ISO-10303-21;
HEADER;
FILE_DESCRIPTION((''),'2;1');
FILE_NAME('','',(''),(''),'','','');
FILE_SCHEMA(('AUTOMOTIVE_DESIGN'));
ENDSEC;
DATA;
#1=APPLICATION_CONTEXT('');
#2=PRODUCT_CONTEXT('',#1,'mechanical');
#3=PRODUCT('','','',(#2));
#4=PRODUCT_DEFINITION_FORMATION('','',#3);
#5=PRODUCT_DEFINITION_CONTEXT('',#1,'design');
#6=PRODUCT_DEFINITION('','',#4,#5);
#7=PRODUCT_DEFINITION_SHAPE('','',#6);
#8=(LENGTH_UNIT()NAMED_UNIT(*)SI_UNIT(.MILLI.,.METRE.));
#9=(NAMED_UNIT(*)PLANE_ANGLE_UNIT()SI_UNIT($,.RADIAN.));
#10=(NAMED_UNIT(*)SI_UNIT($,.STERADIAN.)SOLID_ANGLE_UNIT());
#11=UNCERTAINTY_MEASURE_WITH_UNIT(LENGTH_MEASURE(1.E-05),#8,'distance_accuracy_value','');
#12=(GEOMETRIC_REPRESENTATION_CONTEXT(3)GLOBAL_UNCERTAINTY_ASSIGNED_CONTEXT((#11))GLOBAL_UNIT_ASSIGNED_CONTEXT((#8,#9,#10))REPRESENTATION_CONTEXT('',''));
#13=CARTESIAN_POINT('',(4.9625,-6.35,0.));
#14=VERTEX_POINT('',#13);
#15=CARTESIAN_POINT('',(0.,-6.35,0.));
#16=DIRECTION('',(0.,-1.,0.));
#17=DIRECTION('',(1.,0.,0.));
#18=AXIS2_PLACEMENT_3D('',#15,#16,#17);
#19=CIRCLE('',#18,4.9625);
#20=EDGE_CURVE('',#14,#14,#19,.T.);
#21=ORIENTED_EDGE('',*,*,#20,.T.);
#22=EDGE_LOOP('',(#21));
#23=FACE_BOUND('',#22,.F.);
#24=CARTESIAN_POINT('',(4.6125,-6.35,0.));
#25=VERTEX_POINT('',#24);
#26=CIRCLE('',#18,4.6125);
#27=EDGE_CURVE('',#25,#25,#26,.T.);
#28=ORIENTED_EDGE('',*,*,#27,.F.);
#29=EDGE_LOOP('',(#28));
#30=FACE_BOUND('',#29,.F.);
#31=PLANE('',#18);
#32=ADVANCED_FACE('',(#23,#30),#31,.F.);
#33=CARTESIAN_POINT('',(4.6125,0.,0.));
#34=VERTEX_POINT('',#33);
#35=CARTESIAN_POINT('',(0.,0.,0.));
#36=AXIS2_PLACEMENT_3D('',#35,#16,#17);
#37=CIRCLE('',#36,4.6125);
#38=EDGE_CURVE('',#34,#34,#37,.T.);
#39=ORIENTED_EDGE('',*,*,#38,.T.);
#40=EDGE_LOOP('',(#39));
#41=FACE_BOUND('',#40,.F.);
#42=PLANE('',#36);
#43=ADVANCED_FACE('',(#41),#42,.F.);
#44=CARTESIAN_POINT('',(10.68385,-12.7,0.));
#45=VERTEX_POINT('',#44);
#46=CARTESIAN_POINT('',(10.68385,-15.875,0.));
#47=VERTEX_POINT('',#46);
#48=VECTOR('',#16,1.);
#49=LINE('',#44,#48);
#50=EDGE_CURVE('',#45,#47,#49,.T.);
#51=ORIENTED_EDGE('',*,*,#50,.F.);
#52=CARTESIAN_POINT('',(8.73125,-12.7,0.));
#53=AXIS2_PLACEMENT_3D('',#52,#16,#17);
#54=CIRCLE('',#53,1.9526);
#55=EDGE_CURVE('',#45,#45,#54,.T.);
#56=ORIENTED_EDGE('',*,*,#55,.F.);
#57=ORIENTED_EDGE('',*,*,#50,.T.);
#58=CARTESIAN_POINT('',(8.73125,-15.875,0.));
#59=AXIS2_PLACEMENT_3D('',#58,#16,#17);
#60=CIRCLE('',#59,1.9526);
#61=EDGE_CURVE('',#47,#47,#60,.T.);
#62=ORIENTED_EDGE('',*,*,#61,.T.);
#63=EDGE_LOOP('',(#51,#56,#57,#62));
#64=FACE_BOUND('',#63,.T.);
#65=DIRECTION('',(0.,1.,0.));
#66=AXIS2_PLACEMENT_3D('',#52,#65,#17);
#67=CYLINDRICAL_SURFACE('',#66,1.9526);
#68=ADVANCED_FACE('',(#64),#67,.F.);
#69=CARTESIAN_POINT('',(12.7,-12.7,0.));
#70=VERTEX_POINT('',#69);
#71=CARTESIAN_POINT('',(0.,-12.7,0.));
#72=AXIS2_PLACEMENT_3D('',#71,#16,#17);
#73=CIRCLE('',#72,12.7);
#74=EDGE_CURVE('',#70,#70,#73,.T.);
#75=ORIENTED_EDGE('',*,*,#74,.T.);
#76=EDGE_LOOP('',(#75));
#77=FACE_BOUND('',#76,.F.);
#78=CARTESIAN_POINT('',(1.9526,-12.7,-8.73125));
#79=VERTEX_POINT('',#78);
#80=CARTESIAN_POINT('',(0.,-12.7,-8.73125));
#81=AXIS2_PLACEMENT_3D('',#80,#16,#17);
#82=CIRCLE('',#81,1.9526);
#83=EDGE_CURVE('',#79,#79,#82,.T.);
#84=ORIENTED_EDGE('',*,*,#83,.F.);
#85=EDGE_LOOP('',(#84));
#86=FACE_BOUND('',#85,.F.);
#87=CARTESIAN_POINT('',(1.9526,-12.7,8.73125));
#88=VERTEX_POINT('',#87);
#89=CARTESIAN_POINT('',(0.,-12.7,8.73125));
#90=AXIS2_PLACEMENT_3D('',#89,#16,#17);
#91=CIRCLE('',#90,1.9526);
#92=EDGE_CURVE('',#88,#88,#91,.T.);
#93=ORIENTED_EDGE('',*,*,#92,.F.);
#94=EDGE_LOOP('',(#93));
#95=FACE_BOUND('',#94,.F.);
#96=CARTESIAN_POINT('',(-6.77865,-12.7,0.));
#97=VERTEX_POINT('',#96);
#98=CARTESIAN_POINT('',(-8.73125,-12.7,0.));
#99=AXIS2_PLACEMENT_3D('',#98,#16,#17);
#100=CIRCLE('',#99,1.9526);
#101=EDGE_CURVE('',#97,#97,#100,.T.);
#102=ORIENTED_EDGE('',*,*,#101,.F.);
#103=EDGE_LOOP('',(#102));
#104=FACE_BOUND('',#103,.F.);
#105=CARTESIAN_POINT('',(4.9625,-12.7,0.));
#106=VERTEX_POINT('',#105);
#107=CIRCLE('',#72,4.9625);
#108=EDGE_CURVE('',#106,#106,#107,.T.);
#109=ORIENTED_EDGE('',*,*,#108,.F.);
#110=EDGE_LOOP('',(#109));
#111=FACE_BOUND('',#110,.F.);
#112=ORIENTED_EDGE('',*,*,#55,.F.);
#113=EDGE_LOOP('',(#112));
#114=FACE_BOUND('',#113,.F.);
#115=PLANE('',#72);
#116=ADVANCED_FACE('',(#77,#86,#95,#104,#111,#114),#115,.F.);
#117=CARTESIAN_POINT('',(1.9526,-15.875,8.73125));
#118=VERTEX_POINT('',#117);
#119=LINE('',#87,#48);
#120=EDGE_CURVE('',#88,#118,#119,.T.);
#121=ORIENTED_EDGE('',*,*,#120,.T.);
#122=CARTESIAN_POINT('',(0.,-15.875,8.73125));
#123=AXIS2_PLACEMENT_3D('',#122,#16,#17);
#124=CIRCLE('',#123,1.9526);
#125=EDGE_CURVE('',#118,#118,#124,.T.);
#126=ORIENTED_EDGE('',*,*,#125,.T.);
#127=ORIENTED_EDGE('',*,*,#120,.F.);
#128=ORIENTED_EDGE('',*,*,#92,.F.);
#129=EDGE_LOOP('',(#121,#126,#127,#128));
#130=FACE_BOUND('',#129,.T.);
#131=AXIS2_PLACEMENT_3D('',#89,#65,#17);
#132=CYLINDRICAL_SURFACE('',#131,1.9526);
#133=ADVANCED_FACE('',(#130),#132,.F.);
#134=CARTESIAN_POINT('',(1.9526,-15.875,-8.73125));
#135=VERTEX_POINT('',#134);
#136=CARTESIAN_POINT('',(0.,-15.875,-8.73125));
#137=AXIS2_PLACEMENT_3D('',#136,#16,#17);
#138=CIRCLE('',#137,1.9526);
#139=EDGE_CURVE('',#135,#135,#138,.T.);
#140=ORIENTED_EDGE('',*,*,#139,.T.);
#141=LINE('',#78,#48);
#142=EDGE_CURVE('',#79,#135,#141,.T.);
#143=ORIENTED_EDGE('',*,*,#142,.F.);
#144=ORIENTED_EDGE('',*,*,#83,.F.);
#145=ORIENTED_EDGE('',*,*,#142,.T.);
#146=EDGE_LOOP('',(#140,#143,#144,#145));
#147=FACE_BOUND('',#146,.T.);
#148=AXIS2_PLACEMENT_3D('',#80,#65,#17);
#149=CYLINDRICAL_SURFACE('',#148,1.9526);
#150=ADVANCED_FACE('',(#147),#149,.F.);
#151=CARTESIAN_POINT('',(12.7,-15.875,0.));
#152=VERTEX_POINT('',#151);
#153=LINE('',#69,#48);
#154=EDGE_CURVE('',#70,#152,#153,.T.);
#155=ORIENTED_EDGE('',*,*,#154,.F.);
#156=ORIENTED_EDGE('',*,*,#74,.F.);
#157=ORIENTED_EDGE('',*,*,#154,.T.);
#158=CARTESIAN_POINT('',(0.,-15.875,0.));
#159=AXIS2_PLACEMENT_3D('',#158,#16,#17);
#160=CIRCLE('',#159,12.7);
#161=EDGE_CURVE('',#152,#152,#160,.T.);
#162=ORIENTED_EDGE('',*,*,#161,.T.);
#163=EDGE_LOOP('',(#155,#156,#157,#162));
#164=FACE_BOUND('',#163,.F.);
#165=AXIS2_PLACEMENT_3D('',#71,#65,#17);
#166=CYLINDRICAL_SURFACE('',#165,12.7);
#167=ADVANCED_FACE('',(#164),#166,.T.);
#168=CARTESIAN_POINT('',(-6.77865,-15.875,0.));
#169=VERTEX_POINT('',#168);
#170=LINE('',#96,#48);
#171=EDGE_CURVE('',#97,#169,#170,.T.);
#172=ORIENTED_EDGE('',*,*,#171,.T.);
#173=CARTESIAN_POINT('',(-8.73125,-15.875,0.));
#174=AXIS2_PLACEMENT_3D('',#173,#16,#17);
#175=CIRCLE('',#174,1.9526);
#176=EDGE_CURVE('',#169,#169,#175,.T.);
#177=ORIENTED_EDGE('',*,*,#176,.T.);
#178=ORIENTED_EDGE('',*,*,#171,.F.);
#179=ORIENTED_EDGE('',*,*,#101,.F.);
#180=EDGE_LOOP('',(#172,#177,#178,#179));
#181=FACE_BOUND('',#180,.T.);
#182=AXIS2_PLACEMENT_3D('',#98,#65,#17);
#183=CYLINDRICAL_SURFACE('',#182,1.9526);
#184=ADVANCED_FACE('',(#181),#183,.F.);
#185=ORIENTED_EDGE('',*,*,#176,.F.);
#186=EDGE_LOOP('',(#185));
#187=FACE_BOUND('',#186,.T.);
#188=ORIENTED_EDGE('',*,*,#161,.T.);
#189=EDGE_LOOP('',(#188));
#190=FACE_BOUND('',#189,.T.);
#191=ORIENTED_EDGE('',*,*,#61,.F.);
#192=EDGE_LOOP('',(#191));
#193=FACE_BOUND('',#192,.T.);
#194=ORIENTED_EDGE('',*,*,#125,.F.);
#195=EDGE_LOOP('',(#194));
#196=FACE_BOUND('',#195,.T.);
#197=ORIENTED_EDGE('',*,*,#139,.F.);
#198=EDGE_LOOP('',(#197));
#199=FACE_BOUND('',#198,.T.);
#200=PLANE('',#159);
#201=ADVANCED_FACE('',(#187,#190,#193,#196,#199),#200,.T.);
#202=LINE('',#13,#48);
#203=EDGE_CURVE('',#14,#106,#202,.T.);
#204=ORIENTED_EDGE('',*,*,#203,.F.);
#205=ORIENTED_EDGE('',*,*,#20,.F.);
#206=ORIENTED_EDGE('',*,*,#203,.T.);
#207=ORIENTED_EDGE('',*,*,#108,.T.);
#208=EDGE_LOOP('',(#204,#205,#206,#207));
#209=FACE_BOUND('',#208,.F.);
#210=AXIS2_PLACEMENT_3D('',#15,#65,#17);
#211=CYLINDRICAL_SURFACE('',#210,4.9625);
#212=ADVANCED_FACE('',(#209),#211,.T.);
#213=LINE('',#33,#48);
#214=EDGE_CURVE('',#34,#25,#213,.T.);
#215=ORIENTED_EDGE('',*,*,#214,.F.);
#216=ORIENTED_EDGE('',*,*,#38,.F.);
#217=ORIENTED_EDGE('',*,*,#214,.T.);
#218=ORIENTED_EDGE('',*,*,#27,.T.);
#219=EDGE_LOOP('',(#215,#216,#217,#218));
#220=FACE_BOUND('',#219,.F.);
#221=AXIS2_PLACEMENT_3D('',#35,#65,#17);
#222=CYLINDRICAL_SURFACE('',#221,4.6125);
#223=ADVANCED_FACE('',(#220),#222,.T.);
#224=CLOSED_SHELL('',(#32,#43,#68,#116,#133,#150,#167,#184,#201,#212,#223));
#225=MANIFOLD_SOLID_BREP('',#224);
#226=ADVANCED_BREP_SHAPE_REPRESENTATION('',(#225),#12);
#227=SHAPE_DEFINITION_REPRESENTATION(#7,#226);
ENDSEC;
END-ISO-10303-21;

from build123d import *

# Parameters (mm, degrees)
F0_R     = 4.6125
F1_DEPTH = 6.35
F2_R     = 4.9625
F3_DEPTH = 6.35
F4_R     = 12.7
F4_R_2   = 1.9526
F5_DEPTH = 3.175


# Not quite as in the source:
# - a length typed as a fraction of an inch, garbled in the dataset ("3 / 203.2 mm" for 3/8 in), is restored


with BuildPart() as f1:
    # F0 (on Front) → F1 (new body)
    with BuildSketch(Plane.XZ):
        Circle(F0_R)
    extrude(amount=F1_DEPTH)

    # F2 (on face) → F3 (join)
    with BuildSketch(Plane.XZ.offset(6.35)):
        Circle(F2_R)
    extrude(amount=F3_DEPTH)

    # F4 (on face) → F5 (join)
    with BuildSketch(Plane.XZ.offset(12.7)):
        Circle(F4_R)
        with Locations((0, -8.73125)):
            Circle(F4_R_2, mode=Mode.SUBTRACT)
        with Locations((-8.73125, 0)):
            Circle(F4_R_2, mode=Mode.SUBTRACT)
        with Locations((8.73125, 0)):
            Circle(F4_R_2, mode=Mode.SUBTRACT)
        with Locations((0, 8.73125)):
            Circle(F4_R_2, mode=Mode.SUBTRACT)
    extrude(amount=F5_DEPTH)


solid = f1.part
